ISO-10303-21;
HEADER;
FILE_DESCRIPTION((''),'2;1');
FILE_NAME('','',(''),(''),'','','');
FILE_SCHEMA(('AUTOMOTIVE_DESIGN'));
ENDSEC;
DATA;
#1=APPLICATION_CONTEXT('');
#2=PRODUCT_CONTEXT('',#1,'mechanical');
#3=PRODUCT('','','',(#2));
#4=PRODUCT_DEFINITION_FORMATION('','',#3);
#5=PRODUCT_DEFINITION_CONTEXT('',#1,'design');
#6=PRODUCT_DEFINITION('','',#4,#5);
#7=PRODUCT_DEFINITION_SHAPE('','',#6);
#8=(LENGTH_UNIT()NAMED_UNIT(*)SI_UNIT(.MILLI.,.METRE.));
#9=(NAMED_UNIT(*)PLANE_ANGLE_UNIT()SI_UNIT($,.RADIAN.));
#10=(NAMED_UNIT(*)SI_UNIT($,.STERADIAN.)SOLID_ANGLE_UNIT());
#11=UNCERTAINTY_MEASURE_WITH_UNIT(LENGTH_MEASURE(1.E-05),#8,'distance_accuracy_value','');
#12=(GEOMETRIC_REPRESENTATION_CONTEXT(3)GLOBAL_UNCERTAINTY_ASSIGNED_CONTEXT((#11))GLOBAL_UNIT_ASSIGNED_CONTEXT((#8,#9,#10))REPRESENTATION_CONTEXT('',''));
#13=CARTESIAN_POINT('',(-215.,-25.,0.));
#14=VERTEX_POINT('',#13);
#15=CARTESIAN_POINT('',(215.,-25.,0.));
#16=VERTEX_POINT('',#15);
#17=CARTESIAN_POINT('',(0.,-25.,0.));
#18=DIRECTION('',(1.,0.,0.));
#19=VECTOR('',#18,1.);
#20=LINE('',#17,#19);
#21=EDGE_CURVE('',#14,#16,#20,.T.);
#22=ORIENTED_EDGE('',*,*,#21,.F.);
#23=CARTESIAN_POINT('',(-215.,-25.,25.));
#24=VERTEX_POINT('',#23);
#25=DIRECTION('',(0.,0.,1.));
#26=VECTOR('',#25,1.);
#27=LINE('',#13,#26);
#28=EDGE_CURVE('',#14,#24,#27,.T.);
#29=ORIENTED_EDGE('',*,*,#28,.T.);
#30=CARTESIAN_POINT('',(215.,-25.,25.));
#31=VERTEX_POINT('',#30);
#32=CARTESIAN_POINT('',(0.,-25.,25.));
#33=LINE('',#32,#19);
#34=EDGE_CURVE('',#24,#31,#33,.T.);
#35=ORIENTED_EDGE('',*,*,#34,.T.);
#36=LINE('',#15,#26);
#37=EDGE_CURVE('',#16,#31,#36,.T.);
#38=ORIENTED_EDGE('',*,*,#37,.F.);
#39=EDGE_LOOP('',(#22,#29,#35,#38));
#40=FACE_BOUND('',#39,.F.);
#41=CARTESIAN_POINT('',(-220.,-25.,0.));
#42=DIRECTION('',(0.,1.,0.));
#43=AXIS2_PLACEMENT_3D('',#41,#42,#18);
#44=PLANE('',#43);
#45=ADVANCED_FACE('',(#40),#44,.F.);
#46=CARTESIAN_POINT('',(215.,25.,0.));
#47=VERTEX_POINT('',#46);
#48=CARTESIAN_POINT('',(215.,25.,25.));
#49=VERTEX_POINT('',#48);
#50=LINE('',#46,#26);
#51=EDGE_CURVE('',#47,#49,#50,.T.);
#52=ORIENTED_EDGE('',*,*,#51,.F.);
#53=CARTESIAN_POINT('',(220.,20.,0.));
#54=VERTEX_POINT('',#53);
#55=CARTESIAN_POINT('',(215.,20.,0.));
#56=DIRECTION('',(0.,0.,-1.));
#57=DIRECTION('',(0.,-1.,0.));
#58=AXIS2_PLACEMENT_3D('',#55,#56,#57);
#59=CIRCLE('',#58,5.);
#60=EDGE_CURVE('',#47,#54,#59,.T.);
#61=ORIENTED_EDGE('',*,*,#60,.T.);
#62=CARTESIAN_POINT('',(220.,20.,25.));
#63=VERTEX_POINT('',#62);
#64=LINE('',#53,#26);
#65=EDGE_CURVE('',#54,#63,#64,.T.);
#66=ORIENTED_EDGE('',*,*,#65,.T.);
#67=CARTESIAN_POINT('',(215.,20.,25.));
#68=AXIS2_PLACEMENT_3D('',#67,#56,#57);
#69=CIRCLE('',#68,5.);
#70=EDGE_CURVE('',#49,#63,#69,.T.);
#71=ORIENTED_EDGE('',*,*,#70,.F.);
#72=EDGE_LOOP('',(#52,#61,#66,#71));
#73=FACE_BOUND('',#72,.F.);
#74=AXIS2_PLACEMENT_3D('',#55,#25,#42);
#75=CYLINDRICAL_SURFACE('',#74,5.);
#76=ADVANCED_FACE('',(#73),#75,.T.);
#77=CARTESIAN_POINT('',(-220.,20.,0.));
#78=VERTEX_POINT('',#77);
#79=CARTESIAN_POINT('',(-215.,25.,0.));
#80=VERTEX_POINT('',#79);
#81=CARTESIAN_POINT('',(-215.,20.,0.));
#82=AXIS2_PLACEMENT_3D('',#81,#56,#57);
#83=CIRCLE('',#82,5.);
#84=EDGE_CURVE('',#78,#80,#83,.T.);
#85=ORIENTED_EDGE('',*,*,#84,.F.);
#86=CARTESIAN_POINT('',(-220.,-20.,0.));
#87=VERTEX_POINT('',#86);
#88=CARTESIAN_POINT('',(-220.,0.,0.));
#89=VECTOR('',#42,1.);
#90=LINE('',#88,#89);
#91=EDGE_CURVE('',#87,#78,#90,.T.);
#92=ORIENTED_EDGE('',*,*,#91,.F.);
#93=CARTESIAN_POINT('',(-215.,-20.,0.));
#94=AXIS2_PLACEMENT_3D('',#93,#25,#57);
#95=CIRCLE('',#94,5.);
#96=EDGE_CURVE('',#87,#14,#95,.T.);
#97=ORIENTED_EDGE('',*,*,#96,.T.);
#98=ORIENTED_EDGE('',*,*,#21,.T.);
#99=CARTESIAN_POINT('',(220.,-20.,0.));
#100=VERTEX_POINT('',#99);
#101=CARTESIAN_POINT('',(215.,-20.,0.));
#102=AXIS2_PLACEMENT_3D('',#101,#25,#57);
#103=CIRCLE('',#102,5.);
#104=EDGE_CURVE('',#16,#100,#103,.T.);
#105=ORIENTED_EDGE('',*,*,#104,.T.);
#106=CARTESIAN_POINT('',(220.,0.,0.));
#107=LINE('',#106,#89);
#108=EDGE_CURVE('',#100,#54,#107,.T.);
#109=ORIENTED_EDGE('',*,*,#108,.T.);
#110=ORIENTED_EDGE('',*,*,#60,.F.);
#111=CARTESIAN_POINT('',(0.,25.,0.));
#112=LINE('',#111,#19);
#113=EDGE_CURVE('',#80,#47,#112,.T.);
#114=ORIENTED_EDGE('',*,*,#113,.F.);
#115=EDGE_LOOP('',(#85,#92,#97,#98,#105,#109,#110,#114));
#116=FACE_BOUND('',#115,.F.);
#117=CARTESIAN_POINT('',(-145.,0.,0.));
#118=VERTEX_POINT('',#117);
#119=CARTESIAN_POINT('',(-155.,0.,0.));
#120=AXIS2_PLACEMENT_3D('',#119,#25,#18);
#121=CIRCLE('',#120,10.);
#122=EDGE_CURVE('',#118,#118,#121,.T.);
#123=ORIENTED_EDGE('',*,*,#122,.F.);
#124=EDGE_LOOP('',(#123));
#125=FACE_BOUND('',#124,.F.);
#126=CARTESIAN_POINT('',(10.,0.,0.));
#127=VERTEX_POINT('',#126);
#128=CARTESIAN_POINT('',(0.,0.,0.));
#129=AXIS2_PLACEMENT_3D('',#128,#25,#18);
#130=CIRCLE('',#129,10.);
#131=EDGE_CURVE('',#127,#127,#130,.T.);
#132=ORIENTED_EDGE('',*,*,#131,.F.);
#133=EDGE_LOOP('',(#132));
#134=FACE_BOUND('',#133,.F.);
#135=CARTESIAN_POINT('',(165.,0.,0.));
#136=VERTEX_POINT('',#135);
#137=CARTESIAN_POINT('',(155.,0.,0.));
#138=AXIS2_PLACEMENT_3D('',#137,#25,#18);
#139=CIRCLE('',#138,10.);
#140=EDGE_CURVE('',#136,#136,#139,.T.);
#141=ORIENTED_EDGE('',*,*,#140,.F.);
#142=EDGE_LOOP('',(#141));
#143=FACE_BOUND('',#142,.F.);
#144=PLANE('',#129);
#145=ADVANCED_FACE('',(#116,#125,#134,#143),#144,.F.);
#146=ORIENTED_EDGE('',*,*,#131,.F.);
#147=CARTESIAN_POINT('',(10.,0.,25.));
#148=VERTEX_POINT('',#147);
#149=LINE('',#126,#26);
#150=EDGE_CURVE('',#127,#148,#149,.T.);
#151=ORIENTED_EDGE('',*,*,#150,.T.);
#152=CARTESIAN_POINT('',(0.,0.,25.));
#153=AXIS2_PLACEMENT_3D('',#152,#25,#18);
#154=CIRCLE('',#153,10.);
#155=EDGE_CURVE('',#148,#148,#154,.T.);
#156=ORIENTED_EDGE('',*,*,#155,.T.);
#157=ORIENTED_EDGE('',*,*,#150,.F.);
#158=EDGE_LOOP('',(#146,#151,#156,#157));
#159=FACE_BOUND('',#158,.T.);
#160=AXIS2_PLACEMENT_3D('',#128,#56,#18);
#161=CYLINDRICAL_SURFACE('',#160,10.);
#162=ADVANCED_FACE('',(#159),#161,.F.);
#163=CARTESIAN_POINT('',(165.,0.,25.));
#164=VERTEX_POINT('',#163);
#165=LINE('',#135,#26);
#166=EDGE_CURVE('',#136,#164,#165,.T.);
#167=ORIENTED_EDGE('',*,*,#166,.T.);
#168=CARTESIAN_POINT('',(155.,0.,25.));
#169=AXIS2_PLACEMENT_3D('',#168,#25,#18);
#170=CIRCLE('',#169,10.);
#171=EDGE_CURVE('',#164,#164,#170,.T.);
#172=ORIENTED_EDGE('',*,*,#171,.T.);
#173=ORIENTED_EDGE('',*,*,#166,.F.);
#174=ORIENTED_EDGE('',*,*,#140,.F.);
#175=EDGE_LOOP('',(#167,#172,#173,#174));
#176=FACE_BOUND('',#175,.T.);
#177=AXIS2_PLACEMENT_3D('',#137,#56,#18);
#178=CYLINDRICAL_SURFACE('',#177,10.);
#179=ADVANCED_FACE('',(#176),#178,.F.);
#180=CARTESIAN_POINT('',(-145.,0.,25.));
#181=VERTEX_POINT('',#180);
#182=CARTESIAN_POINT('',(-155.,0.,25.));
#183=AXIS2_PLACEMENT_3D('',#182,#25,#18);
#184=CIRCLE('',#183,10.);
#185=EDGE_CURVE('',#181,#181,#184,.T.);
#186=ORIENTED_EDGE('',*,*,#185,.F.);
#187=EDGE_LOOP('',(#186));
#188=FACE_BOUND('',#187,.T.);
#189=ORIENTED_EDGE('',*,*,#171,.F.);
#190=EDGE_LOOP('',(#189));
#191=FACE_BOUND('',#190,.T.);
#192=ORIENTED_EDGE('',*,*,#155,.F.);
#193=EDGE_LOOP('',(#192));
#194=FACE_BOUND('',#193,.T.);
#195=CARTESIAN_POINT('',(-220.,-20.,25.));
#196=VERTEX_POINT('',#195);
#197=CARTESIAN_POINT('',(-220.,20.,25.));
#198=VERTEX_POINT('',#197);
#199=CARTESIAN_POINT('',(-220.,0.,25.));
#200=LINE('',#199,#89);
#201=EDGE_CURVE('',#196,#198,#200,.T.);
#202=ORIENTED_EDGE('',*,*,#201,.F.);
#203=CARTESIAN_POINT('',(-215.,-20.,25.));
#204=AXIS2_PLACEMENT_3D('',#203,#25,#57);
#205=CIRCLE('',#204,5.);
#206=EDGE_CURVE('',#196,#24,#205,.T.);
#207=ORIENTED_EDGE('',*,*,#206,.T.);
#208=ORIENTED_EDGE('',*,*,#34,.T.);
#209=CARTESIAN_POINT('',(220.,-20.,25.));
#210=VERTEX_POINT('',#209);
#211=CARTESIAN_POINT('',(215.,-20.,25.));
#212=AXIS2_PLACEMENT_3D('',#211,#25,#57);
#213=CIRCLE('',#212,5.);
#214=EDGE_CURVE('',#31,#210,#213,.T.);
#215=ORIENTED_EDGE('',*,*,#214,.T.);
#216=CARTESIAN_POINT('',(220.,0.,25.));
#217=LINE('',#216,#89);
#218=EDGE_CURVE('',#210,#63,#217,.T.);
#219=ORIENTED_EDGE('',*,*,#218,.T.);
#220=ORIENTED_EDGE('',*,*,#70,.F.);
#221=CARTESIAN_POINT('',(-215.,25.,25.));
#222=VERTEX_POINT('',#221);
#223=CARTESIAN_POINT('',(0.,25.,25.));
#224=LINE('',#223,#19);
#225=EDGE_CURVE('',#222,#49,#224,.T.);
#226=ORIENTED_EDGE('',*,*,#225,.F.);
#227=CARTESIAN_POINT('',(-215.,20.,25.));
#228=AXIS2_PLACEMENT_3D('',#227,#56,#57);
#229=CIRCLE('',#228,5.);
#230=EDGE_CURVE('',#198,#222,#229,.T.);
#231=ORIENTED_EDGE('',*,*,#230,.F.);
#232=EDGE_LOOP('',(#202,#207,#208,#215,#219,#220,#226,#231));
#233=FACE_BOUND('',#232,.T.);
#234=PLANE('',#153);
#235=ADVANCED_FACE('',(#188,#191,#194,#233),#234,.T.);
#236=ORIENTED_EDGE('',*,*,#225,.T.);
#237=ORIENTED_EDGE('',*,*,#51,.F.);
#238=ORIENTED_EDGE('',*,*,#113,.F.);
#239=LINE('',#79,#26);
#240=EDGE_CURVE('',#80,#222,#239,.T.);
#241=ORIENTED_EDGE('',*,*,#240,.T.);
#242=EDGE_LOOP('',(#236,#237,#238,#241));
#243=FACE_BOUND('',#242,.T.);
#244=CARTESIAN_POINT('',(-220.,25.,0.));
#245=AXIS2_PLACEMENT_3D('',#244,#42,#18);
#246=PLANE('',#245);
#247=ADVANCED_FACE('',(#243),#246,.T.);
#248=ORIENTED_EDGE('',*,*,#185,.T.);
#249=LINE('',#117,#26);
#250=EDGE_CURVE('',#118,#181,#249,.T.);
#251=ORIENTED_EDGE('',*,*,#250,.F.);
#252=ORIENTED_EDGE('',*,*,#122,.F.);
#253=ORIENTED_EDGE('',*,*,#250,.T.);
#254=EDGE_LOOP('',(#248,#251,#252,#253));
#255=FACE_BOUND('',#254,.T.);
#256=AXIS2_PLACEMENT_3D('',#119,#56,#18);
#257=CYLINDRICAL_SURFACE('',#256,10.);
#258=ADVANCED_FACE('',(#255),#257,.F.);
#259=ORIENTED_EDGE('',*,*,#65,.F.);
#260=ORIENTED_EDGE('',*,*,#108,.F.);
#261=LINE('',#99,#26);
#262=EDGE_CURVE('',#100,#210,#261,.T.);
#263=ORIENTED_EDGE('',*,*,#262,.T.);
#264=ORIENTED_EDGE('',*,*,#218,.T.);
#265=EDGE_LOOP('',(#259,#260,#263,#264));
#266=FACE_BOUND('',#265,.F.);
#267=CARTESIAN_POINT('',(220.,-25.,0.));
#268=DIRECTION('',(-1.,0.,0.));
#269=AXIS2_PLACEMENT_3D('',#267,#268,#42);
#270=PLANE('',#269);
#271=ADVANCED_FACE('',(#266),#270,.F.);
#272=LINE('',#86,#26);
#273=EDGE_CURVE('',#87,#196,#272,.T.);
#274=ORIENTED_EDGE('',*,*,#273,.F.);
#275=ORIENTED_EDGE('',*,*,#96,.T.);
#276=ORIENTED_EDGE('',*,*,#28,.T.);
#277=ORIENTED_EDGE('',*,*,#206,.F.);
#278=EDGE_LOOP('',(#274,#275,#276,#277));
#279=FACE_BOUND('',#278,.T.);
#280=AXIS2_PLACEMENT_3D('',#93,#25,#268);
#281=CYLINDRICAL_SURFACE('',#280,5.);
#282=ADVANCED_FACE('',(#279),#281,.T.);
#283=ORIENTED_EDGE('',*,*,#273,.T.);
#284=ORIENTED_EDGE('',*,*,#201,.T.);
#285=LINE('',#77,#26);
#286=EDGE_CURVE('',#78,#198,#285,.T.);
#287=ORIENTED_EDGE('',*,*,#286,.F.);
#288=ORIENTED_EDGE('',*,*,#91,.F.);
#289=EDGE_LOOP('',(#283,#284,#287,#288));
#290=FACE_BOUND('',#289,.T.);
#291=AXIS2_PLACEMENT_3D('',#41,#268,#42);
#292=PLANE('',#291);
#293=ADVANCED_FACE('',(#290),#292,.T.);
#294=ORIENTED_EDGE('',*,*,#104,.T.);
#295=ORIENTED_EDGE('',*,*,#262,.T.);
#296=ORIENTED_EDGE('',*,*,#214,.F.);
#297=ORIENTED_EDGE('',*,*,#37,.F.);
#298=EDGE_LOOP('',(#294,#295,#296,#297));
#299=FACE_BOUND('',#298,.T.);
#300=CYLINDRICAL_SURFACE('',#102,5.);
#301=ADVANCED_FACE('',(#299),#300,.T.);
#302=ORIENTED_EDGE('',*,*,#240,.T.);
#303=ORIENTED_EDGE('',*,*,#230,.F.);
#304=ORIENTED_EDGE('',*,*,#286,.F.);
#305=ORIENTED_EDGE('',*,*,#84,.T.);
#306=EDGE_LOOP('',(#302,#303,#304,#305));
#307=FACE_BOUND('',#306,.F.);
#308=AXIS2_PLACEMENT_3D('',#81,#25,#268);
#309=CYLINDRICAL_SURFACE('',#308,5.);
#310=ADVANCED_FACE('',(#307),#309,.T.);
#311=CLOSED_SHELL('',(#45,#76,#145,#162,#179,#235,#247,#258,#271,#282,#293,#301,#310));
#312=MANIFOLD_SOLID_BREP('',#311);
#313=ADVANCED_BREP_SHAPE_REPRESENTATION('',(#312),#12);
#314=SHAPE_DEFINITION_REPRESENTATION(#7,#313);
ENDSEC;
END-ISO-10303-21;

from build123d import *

# Parameters (mm, degrees)
F0_W     = 440
F0_H     = 50
F0_R     = 10
F1_DEPTH = 25
F2_R     = 5


# Not quite as in the source:
# - a feature of the source that left no trace in its solid (it failed there, or was rolled back) is left out


with BuildPart() as f1:
    # F0 (on Top) → F1 (new body)
    with BuildSketch(Plane.XY):
        Rectangle(F0_W, F0_H)
        with Locations((-155, 0)):
            Circle(F0_R, mode=Mode.SUBTRACT)
        Circle(F0_R, mode=Mode.SUBTRACT)
        with Locations((155, 0)):
            Circle(F0_R, mode=Mode.SUBTRACT)
    extrude(amount=F1_DEPTH)

    # F2
    f2_edges = [f1.edges().sort_by_distance(p)[0] for p in [
        (-220, -25, 12.5),
        (220, -25, 12.5),
        (220, 25, 12.5),
        (-220, 25, 12.5),
    ]]
    fillet(f2_edges, radius=F2_R)


solid = f1.part
